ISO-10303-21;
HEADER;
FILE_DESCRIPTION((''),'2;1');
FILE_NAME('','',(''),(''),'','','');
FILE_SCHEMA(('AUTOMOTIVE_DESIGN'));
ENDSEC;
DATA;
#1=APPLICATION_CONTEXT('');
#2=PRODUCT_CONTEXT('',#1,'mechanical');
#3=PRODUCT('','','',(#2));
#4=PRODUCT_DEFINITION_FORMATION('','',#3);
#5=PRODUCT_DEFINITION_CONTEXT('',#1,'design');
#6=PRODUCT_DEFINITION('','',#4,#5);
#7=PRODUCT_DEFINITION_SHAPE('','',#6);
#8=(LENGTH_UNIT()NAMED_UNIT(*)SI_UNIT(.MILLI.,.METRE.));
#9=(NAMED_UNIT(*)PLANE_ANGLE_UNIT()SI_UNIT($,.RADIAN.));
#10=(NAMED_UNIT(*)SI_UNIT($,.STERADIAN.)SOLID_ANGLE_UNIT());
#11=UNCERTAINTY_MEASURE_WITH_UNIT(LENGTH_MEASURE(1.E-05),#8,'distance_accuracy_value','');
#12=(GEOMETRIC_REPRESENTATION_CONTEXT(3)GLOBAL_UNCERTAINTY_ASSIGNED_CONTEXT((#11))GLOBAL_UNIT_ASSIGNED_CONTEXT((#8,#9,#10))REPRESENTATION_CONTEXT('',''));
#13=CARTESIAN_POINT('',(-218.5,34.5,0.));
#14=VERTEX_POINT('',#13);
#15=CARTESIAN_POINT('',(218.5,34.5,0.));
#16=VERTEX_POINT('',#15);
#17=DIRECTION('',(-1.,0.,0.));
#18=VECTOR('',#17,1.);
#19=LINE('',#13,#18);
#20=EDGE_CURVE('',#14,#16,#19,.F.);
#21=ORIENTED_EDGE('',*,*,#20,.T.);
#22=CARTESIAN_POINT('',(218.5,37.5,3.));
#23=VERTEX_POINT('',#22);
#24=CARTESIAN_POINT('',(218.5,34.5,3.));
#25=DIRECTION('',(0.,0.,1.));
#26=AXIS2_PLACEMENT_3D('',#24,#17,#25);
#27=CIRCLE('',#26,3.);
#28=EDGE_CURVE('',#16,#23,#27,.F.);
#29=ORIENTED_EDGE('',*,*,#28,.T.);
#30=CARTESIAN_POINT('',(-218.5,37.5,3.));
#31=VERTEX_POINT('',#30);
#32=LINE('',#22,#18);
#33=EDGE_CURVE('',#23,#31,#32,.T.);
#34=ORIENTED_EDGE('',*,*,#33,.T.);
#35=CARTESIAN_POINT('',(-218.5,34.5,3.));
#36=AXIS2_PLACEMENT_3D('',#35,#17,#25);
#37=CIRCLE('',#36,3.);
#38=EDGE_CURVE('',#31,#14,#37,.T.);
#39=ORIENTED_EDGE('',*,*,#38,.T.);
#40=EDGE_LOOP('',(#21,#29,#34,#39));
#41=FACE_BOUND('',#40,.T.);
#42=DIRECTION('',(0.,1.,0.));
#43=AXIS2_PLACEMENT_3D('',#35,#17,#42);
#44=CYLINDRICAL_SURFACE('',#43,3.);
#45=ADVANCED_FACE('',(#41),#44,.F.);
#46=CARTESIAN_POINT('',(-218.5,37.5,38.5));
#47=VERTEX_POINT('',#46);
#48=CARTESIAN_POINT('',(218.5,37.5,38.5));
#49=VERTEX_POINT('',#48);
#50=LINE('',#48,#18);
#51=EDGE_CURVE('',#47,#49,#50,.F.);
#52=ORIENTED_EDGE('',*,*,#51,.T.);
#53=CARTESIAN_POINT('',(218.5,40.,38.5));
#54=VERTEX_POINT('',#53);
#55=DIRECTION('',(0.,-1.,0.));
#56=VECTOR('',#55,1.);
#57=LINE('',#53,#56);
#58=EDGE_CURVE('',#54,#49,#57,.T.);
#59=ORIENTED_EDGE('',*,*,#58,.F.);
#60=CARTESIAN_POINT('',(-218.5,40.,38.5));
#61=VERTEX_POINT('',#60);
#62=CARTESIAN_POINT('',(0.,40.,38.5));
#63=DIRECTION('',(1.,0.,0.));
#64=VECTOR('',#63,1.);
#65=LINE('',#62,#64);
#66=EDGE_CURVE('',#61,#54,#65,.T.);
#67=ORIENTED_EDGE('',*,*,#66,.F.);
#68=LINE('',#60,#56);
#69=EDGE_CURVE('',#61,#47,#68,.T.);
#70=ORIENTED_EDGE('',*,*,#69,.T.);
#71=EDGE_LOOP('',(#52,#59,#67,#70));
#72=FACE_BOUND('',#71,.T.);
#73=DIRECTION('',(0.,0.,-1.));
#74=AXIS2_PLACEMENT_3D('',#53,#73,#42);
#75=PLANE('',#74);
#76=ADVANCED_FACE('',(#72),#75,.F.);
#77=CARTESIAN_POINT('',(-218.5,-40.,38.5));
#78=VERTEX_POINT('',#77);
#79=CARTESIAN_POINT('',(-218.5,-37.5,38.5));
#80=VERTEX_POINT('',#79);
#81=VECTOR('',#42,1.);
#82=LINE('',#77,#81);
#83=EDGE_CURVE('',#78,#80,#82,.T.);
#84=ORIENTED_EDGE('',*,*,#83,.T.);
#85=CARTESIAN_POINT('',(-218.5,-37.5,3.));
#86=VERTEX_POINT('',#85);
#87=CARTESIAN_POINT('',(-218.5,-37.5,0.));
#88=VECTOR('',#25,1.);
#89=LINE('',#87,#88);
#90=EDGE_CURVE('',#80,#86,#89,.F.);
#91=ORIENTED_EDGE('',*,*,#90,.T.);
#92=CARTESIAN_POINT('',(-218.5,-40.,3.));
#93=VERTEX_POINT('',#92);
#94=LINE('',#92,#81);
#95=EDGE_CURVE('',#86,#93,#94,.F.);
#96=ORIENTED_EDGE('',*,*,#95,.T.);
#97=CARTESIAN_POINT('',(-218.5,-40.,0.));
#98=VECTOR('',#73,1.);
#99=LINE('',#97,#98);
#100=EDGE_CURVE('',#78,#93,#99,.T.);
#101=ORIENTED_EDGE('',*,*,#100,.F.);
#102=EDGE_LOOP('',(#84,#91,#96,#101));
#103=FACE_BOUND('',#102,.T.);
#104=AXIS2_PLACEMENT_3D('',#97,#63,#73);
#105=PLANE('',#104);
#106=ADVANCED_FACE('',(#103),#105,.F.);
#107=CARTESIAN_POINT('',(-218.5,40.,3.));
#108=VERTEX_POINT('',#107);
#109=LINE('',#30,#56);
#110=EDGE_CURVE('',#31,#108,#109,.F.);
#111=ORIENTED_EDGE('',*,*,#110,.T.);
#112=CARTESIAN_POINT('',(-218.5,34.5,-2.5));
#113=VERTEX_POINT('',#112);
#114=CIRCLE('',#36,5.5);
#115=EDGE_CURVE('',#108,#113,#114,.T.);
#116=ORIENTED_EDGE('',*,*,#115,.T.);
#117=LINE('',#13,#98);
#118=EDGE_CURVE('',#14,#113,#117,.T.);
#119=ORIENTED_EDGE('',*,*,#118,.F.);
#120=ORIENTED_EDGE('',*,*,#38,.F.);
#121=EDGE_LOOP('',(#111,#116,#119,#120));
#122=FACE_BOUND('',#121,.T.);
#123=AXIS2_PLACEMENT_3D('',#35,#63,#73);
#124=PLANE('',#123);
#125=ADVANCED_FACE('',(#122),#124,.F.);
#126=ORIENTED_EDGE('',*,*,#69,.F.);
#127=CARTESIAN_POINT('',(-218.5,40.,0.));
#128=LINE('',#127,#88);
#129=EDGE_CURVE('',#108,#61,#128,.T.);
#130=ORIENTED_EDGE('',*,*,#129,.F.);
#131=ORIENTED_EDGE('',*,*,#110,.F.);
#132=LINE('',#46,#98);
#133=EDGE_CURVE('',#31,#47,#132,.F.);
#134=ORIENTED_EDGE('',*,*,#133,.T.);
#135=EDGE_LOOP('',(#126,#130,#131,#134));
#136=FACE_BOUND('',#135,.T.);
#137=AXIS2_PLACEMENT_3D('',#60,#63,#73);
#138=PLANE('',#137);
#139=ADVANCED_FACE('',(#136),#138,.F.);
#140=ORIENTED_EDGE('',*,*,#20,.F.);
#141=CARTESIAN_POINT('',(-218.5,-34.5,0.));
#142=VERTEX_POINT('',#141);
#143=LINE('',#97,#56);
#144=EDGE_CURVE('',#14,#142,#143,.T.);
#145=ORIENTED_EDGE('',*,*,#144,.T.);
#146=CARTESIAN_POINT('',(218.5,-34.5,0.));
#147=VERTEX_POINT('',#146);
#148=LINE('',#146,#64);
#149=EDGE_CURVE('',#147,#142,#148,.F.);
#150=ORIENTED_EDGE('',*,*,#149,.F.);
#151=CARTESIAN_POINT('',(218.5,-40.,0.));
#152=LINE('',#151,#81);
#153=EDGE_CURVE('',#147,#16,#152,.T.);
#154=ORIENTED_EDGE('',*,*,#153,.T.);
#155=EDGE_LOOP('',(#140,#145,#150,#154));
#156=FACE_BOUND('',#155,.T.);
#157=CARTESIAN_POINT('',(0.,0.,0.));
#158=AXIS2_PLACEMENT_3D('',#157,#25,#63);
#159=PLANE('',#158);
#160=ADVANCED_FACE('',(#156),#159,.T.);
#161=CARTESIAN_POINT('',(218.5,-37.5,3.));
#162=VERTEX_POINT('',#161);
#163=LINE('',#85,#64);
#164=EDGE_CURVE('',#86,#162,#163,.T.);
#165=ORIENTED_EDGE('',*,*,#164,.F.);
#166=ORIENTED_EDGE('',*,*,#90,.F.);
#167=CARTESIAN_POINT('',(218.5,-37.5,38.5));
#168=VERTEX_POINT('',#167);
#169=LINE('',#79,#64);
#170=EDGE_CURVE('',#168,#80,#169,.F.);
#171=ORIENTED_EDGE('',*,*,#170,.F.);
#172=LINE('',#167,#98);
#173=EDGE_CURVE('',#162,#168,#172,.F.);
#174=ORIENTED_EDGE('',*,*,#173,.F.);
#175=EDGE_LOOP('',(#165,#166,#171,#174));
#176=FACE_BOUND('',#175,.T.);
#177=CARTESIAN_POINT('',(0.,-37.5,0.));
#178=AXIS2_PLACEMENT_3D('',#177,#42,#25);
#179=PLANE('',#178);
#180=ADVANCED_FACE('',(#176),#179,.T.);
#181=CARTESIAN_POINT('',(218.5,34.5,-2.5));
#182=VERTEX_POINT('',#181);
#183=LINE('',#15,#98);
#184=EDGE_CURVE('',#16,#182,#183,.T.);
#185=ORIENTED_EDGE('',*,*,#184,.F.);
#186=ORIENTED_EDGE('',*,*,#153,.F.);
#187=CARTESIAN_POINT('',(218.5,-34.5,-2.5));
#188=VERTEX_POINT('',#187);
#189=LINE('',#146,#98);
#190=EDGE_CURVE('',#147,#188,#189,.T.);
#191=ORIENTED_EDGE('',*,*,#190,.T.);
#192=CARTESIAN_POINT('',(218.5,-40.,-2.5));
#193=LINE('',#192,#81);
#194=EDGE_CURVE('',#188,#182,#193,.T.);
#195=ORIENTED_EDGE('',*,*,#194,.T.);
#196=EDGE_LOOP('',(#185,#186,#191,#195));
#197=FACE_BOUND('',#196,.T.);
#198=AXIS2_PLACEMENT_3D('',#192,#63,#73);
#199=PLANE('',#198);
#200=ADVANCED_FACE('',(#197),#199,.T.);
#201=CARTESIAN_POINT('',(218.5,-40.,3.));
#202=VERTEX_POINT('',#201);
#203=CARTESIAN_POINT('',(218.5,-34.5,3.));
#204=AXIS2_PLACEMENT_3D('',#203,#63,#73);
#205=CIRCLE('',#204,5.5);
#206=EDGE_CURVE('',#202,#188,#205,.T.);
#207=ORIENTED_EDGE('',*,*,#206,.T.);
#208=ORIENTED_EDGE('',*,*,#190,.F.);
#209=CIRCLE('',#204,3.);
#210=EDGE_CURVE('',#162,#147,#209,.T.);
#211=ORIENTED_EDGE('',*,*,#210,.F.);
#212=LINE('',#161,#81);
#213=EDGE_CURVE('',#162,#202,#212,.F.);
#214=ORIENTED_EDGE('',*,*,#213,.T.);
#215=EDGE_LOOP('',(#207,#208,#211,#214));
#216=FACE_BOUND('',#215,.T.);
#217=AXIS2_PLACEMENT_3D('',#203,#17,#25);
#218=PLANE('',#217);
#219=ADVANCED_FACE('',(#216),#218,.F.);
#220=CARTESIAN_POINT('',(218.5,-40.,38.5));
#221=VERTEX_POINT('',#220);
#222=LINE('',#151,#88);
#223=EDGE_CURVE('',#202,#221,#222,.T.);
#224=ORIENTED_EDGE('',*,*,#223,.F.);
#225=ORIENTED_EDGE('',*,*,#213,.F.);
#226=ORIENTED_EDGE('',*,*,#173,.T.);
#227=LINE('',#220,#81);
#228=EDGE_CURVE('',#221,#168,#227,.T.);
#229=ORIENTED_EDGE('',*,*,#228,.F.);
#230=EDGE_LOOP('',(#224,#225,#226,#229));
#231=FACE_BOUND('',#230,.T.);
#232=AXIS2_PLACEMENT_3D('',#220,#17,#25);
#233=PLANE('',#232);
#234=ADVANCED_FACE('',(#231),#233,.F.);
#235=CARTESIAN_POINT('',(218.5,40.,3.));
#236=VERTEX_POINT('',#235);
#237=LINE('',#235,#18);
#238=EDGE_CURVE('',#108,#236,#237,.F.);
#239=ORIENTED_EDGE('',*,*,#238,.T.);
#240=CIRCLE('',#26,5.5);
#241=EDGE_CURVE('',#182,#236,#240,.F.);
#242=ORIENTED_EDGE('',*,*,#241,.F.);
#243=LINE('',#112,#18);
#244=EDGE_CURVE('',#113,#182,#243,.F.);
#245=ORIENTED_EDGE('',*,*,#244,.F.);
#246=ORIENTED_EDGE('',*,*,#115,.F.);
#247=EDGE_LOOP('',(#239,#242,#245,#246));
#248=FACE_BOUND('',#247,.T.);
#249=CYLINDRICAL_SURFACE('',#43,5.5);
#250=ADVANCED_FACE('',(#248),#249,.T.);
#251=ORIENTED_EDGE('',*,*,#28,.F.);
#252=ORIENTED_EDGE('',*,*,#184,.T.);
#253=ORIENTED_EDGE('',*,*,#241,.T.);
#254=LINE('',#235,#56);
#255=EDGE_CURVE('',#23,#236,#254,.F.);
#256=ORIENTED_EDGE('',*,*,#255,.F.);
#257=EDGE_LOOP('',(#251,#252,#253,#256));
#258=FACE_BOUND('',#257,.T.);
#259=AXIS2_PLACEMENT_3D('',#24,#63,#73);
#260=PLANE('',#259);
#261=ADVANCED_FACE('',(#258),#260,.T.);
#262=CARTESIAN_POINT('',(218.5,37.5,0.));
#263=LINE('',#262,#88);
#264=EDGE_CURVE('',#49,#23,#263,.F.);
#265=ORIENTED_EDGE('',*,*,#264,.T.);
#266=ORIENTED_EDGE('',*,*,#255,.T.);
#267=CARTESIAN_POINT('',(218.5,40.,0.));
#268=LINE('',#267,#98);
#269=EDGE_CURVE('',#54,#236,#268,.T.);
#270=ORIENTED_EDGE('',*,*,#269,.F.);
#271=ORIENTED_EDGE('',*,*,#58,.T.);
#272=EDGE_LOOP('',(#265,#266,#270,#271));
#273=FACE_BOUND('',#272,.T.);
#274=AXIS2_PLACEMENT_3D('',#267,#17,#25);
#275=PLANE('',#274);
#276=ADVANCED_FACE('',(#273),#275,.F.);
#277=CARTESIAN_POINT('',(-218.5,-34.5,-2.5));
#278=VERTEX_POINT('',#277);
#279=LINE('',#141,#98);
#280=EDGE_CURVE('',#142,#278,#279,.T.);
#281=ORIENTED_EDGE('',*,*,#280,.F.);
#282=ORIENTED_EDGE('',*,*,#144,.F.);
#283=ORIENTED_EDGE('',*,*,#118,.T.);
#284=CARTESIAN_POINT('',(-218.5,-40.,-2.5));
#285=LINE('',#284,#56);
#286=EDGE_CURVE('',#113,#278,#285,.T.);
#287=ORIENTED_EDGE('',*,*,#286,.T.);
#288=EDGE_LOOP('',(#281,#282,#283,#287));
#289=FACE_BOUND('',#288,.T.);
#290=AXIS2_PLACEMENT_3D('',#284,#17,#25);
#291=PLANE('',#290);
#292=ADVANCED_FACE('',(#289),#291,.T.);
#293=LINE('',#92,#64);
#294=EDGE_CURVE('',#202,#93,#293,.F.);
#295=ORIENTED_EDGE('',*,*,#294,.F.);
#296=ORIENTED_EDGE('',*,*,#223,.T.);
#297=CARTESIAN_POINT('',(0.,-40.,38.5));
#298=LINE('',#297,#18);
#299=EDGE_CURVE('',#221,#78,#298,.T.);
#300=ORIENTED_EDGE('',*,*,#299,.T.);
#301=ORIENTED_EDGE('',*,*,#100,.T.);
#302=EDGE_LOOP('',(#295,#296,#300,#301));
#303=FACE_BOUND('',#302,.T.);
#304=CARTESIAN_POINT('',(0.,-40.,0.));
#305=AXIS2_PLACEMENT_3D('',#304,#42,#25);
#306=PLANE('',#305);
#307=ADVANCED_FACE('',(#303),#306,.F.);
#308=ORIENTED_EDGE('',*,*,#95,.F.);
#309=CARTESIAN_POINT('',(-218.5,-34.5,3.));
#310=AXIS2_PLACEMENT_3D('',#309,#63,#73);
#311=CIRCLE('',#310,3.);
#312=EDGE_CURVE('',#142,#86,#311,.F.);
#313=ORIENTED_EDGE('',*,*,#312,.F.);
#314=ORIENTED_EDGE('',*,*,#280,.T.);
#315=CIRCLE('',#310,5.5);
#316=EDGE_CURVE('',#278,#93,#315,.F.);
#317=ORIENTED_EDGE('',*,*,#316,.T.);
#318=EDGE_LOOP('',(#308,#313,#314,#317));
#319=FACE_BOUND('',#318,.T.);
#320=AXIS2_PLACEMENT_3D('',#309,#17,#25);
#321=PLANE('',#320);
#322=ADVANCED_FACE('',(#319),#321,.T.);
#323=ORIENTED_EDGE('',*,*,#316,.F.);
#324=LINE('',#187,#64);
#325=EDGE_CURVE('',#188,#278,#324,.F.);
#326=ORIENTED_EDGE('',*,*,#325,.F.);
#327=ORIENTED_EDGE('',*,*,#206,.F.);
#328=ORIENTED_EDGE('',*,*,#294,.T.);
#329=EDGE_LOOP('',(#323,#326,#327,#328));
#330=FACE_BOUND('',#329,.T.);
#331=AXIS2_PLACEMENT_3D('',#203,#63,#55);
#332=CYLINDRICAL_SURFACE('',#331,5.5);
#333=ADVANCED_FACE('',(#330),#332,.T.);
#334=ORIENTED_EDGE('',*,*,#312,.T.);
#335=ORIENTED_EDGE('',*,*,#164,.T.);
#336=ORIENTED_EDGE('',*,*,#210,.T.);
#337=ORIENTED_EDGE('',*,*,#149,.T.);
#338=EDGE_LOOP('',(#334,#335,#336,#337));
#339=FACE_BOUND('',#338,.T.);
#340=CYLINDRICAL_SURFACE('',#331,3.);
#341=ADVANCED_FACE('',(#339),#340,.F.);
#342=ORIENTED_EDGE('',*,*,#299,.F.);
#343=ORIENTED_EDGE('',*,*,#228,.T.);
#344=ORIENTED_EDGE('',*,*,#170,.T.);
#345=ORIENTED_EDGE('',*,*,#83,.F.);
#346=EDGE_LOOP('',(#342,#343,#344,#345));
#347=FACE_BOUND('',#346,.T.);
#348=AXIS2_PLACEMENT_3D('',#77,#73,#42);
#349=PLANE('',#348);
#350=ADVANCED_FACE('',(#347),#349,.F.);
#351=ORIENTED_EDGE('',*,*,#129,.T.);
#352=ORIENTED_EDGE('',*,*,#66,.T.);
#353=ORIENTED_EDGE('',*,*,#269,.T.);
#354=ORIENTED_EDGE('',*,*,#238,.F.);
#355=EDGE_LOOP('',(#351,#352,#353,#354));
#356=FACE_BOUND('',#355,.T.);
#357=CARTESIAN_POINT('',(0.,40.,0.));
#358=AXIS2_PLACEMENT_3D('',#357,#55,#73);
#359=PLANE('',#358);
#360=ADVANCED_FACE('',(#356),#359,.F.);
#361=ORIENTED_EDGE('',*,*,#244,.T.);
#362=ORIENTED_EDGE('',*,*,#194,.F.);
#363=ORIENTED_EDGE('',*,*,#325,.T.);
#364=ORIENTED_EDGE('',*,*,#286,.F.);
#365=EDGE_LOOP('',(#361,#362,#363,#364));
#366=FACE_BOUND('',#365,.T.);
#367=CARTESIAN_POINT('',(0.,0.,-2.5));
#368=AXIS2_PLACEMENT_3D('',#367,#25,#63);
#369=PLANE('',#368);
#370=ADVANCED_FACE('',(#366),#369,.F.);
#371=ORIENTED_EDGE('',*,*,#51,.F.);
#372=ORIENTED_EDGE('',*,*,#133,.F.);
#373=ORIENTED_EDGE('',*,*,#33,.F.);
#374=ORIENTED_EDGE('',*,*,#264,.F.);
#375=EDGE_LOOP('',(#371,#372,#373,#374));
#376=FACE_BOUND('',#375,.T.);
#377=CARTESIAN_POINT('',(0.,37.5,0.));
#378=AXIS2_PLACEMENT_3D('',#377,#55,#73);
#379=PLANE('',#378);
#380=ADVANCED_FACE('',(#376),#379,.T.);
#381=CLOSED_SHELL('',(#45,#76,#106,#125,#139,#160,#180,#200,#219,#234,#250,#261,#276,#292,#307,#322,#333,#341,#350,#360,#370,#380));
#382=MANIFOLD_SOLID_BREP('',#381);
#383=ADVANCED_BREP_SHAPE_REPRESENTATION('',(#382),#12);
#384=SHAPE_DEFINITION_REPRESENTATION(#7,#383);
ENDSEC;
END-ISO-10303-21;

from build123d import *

# Parameters (mm, degrees)
SKETCH1_W                      = 437
SKETCH1_H                      = 80
BASE_FLANGE1_DEPTH             = 2.5
EDGE_FLANGE1_STRIP_W           = 16
EDGE_FLANGE1_STRIP_H           = 2.5
EDGE_FLANGE1_STRIP_CUT_DEPTH   = 437
EDGE_FLANGE1_STRIP_2_W         = 16
EDGE_FLANGE1_STRIP_2_H         = 2.5
EDGE_FLANGE1_STRIP_CUT_2_DEPTH = 437
EDGE_FLANGE1_DEPTH             = 437
EDGE_FLANGE1_BEND_DEPTH        = 437


# Sheet-metal steps are written as plain solids
with BuildPart() as part:
    # Sketch1 → Base-Flange1 (new body)
    with BuildSketch(Plane.XY):
        Rectangle(SKETCH1_W, SKETCH1_H)
    extrude(amount=-BASE_FLANGE1_DEPTH)

    # Edge-Flange1 strip (across the edge) → Edge-Flange1 strip cut (cut)
    with BuildSketch(Plane(origin=(218.5, 40, 0), x_dir=(0, -1, 0), z_dir=(-1, 0, 0))):
        with Locations((-2.5, -1.25)):
            Rectangle(EDGE_FLANGE1_STRIP_W, EDGE_FLANGE1_STRIP_H)
    extrude(amount=EDGE_FLANGE1_STRIP_CUT_DEPTH, mode=Mode.SUBTRACT)

    # Edge-Flange1 strip 2 (across the edge) → Edge-Flange1 strip cut 2 (cut)
    with BuildSketch(Plane(origin=(-218.5, -40, 0), x_dir=(0, 1, 0), z_dir=(1, 0, 0))):
        with Locations((-2.5, -1.25)):
            Rectangle(EDGE_FLANGE1_STRIP_2_W, EDGE_FLANGE1_STRIP_2_H)
    extrude(amount=EDGE_FLANGE1_STRIP_CUT_2_DEPTH, mode=Mode.SUBTRACT)

    # Edge-Flange1 section (across the edge) → Edge-Flange1 (add)
    with BuildSketch(Plane(origin=(218.5, 40, 0), x_dir=(0, -1, 0), z_dir=(-1, 0, 0))):
        with BuildLine():
            Line((0, 3), (0, 38.5))
            Line((0, 38.5), (2.5, 38.5))
            Line((2.5, 38.5), (2.5, 3))
            ThreePointArc((2.5, 3), (3.378679656, 0.878679656), (5.5, 0))
            Line((5.5, 0), (5.5, -2.5))
            ThreePointArc((5.5, -2.5), (1.610912703, -0.889087297), (0, 3))
        make_face()
    extrude(amount=EDGE_FLANGE1_DEPTH)

    # Edge-Flange1 section 2 (across the edge) → Edge-Flange1 bend (add)
    with BuildSketch(Plane(origin=(-218.5, -40, 0), x_dir=(0, 1, 0), z_dir=(1, 0, 0))):
        with BuildLine():
            Line((0, 3), (0, 38.5))
            Line((0, 38.5), (2.5, 38.5))
            Line((2.5, 38.5), (2.5, 3))
            ThreePointArc((2.5, 3), (3.378679656, 0.878679656), (5.5, 0))
            Line((5.5, 0), (5.5, -2.5))
            ThreePointArc((5.5, -2.5), (1.610912703, -0.889087297), (0, 3))
        make_face()
    extrude(amount=EDGE_FLANGE1_BEND_DEPTH)


solid = part.part
